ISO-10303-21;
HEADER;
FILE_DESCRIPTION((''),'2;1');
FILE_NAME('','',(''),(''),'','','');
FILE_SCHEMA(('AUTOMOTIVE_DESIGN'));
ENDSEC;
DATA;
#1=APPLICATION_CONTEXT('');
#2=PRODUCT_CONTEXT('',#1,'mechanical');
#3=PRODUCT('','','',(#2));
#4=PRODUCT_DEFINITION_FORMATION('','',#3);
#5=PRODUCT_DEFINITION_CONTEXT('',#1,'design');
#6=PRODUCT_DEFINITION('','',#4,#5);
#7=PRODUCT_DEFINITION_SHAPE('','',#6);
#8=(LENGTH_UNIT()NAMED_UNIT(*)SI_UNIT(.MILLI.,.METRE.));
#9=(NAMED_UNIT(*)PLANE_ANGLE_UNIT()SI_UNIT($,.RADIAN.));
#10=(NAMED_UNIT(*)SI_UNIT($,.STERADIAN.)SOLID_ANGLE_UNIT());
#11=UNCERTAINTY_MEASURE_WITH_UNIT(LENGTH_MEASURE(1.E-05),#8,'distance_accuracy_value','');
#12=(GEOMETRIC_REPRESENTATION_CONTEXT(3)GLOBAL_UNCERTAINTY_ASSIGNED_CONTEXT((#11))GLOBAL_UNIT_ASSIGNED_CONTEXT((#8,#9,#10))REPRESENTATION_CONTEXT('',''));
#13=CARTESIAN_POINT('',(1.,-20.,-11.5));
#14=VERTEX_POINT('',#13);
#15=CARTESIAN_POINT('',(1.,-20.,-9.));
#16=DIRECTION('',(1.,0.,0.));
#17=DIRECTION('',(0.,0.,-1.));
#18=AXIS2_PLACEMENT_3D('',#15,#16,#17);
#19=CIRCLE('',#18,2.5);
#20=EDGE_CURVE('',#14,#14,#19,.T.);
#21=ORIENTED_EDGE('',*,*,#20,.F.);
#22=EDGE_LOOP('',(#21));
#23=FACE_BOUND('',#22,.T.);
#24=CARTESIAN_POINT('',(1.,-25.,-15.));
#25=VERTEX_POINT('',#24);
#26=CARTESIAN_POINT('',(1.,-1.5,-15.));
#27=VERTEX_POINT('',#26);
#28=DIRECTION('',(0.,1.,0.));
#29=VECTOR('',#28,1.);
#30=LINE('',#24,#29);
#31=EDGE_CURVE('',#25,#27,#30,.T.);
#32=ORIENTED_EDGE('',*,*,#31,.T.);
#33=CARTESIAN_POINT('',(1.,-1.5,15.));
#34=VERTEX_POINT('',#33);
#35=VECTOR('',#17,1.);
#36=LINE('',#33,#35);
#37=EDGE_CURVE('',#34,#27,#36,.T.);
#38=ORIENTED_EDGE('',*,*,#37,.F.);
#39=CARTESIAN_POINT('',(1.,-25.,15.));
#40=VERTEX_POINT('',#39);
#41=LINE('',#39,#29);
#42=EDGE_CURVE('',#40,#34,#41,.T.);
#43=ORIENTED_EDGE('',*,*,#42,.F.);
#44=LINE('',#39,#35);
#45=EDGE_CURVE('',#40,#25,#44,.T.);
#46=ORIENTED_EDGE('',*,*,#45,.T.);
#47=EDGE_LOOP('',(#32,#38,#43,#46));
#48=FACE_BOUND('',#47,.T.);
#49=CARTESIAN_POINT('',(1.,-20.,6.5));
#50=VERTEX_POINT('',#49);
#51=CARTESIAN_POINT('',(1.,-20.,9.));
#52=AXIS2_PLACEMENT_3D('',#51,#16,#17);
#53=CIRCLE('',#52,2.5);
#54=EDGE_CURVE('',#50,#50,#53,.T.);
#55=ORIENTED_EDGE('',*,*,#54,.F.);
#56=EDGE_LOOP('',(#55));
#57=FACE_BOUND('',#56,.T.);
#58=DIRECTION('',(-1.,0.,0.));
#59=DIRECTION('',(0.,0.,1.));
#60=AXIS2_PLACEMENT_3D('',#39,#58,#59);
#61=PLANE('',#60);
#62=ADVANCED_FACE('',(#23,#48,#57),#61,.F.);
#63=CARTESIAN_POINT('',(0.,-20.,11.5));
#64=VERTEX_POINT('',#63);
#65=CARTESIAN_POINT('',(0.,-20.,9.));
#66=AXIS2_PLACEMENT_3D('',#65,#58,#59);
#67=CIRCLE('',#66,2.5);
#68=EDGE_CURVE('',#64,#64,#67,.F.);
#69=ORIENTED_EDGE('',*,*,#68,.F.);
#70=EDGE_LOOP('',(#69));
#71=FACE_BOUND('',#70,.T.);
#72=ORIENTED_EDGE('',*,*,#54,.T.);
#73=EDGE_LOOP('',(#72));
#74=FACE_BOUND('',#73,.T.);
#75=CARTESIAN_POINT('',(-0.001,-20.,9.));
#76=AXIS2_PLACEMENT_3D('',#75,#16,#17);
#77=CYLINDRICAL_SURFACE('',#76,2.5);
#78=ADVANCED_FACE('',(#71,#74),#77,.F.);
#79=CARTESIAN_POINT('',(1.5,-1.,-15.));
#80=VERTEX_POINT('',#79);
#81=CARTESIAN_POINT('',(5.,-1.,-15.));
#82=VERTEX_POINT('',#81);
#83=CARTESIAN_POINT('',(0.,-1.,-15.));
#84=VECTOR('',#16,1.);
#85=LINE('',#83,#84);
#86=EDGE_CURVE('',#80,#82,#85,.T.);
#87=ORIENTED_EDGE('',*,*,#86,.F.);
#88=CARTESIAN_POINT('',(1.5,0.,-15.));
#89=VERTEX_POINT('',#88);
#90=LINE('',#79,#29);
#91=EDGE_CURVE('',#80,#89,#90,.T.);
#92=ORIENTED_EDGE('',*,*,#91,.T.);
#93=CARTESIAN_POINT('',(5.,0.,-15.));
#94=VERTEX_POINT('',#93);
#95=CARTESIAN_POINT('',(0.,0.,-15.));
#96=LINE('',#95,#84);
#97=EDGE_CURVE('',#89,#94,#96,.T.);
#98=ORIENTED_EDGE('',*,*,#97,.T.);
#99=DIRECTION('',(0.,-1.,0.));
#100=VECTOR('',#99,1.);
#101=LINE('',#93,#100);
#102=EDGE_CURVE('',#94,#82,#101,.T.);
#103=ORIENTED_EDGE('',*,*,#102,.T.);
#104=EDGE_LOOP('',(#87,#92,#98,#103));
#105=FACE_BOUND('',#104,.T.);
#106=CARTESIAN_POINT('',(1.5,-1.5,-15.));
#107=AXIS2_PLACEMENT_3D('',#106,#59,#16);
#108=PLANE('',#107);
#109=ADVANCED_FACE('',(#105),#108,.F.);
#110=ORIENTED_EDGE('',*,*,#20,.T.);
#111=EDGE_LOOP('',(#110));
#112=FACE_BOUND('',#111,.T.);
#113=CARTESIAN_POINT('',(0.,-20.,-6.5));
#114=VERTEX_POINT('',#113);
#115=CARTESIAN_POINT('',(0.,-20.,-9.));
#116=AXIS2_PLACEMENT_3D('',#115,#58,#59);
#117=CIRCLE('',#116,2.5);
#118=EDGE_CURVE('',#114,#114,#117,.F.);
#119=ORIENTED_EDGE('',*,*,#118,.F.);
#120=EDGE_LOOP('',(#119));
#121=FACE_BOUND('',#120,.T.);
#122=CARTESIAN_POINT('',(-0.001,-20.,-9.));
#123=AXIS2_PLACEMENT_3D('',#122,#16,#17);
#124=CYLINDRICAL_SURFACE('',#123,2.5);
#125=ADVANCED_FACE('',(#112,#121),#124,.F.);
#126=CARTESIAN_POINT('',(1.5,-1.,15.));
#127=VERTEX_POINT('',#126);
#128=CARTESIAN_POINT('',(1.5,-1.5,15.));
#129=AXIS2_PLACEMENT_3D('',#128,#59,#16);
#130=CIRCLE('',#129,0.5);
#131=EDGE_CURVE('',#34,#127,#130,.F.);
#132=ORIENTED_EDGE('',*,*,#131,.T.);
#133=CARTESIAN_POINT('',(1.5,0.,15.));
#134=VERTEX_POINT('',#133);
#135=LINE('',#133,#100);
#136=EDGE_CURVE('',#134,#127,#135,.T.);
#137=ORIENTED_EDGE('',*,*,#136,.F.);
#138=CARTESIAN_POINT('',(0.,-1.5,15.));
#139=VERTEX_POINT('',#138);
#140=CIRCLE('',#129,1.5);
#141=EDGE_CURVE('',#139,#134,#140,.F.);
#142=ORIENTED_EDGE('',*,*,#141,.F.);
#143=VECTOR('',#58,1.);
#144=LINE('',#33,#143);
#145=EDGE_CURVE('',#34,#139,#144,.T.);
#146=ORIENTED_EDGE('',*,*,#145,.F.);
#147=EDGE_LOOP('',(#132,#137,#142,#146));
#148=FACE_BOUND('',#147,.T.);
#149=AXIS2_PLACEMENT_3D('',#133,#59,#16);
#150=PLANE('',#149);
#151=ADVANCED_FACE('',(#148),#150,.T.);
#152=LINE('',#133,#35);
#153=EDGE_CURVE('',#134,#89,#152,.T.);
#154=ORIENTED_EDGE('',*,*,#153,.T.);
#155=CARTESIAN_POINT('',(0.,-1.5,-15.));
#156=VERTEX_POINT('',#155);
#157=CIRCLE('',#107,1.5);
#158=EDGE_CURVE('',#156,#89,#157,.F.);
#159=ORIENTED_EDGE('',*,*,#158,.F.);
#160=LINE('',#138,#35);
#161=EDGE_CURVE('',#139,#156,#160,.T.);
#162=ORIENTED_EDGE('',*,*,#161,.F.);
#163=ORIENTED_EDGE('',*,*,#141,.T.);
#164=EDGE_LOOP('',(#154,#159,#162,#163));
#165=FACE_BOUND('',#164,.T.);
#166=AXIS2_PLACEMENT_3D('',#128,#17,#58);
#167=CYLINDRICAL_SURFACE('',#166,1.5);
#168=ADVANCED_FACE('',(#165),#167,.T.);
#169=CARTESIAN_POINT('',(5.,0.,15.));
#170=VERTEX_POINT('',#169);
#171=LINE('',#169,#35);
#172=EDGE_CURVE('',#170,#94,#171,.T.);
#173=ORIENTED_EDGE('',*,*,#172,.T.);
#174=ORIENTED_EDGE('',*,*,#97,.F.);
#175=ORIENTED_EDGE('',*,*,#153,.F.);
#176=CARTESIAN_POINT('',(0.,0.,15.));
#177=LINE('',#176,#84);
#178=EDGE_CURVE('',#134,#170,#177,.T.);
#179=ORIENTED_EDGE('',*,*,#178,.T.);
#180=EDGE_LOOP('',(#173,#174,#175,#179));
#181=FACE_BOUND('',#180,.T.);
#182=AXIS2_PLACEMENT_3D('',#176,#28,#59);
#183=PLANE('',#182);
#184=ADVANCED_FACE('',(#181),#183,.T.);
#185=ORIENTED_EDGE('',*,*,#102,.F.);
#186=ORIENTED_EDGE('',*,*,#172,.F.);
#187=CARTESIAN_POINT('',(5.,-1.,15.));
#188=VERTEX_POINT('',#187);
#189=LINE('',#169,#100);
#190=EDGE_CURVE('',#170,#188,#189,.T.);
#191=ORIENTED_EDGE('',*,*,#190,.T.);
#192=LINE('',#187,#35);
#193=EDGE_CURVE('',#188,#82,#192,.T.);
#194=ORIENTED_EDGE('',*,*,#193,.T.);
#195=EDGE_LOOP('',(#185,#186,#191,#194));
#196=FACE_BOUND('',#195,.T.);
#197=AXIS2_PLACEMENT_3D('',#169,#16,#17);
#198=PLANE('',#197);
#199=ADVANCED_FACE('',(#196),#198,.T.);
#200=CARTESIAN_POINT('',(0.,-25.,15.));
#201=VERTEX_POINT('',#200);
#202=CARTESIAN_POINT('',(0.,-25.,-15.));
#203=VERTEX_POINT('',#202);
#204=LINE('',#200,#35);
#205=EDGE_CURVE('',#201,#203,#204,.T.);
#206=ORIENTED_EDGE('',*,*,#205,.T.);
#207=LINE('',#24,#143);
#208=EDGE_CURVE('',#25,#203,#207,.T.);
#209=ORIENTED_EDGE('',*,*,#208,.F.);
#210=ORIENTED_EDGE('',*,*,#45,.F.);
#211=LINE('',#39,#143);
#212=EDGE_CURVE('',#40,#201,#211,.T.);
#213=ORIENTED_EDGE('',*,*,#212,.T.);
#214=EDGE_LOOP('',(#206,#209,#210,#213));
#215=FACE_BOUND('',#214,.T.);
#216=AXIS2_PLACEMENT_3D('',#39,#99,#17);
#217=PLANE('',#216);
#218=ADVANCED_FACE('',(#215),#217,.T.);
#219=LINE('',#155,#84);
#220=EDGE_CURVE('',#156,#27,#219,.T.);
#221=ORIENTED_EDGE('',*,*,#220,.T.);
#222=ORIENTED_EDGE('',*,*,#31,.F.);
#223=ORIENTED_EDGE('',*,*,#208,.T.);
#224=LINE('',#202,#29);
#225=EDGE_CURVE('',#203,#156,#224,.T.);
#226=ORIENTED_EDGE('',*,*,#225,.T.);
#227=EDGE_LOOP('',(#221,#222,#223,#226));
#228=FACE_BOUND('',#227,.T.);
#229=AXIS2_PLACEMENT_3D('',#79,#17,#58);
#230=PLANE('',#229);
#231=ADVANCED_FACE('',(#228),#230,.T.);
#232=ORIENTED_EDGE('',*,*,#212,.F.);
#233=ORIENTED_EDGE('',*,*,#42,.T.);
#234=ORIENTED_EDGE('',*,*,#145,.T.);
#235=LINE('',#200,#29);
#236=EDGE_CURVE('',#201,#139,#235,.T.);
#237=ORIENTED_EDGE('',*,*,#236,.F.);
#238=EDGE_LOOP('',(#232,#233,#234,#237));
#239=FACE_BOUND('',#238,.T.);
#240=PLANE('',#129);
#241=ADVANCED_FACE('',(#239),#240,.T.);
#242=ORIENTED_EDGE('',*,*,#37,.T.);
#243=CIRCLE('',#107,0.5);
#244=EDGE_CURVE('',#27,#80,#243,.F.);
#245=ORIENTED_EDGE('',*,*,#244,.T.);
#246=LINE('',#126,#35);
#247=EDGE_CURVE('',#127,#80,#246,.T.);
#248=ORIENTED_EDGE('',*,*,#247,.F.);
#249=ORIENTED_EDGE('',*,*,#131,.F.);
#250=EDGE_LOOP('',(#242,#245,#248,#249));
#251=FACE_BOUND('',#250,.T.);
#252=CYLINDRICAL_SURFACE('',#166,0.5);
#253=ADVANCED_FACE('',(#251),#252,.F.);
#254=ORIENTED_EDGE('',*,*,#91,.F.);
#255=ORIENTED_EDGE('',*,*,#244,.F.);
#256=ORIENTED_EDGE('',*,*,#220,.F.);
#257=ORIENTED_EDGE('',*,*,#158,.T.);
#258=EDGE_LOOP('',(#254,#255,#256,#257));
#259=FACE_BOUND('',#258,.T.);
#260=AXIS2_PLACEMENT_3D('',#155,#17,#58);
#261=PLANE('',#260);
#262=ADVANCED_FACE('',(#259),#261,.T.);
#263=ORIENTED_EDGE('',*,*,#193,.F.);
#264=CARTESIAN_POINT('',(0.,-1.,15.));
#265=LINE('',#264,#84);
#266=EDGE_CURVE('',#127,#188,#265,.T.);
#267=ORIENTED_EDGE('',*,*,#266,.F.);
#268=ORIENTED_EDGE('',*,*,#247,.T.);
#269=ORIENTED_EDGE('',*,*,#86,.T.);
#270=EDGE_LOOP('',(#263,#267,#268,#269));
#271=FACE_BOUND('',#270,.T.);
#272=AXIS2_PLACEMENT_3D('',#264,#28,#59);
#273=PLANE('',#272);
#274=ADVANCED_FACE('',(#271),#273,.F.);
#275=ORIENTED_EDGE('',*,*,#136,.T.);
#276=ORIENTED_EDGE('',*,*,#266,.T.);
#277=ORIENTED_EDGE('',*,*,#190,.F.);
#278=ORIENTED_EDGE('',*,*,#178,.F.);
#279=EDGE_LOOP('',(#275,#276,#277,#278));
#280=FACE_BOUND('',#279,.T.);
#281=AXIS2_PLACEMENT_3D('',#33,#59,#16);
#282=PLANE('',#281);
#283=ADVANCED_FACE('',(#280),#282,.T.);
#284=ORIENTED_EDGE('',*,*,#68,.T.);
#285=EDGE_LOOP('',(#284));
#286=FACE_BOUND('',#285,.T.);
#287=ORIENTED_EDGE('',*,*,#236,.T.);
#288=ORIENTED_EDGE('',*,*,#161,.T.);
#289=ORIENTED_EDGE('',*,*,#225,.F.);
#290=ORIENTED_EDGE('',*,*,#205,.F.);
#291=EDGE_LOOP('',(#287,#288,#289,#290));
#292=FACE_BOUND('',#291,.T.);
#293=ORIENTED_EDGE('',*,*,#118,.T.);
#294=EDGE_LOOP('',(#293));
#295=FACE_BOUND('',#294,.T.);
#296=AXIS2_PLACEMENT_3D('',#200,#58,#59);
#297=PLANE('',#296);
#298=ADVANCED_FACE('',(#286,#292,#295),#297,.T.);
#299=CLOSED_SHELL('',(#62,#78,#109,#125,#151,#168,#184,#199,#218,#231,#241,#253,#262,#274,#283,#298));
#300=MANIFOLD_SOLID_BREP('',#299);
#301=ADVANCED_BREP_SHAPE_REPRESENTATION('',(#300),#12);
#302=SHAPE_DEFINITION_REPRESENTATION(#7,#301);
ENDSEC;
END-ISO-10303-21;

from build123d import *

# Parameters (mm, degrees)
SM_BASE_FLANGE_1_DEPTH = 15
CUT_EXTRUDE_1_REACH    = 31.428
SKETCH_3_R             = 2.5


# Sheet-metal steps are written as plain solids
with BuildPart() as part:
    # Sketch 1 → 基体-法兰1 (new, symmetric)
    with BuildSketch(Plane.XY):
        with BuildLine():
            Line((0, -25), (0, -1.5))
            ThreePointArc((0, -1.5), (0.439339828, -0.439339828), (1.5, 0))
            Line((1.5, 0), (5, 0))
            Line((5, 0), (5, -1))
            Line((5, -1), (1.5, -1))
            ThreePointArc((1.5, -1), (1.146446609, -1.146446609), (1, -1.5))
            Line((1, -1.5), (1, -25))
            Line((1, -25), (0, -25))
        make_face()
    extrude(amount=SM_BASE_FLANGE_1_DEPTH, both=True)

    # 草图3 → 切除-拉伸1 (cut, up to next)
    with BuildSketch(Plane(origin=(1, 0, 0), x_dir=(0, 0, -1), z_dir=(1, 0, 0)), mode=Mode.PRIVATE) as cut_extrude_1_sk1:
        with Locations((-9, -20)):
            Circle(SKETCH_3_R)
    cut_extrude_1_tool1 = extrude(cut_extrude_1_sk1.sketch, amount=-CUT_EXTRUDE_1_REACH, mode=Mode.PRIVATE) & part.part
    # 草图3 → 切除-拉伸1 (cut, up to next)
    with BuildSketch(Plane(origin=(1, 0, 0), x_dir=(0, 0, -1), z_dir=(1, 0, 0)), mode=Mode.PRIVATE) as cut_extrude_1_sk2:
        with Locations((9, -20)):
            Circle(SKETCH_3_R)
    cut_extrude_1_tool2 = extrude(cut_extrude_1_sk2.sketch, amount=-CUT_EXTRUDE_1_REACH, mode=Mode.PRIVATE) & part.part
    add(cut_extrude_1_tool1.solids().sort_by_distance((1, -20, 9))[0], mode=Mode.SUBTRACT)
    add(cut_extrude_1_tool2.solids().sort_by_distance((1, -20, -9))[0], mode=Mode.SUBTRACT)


solid = part.part
